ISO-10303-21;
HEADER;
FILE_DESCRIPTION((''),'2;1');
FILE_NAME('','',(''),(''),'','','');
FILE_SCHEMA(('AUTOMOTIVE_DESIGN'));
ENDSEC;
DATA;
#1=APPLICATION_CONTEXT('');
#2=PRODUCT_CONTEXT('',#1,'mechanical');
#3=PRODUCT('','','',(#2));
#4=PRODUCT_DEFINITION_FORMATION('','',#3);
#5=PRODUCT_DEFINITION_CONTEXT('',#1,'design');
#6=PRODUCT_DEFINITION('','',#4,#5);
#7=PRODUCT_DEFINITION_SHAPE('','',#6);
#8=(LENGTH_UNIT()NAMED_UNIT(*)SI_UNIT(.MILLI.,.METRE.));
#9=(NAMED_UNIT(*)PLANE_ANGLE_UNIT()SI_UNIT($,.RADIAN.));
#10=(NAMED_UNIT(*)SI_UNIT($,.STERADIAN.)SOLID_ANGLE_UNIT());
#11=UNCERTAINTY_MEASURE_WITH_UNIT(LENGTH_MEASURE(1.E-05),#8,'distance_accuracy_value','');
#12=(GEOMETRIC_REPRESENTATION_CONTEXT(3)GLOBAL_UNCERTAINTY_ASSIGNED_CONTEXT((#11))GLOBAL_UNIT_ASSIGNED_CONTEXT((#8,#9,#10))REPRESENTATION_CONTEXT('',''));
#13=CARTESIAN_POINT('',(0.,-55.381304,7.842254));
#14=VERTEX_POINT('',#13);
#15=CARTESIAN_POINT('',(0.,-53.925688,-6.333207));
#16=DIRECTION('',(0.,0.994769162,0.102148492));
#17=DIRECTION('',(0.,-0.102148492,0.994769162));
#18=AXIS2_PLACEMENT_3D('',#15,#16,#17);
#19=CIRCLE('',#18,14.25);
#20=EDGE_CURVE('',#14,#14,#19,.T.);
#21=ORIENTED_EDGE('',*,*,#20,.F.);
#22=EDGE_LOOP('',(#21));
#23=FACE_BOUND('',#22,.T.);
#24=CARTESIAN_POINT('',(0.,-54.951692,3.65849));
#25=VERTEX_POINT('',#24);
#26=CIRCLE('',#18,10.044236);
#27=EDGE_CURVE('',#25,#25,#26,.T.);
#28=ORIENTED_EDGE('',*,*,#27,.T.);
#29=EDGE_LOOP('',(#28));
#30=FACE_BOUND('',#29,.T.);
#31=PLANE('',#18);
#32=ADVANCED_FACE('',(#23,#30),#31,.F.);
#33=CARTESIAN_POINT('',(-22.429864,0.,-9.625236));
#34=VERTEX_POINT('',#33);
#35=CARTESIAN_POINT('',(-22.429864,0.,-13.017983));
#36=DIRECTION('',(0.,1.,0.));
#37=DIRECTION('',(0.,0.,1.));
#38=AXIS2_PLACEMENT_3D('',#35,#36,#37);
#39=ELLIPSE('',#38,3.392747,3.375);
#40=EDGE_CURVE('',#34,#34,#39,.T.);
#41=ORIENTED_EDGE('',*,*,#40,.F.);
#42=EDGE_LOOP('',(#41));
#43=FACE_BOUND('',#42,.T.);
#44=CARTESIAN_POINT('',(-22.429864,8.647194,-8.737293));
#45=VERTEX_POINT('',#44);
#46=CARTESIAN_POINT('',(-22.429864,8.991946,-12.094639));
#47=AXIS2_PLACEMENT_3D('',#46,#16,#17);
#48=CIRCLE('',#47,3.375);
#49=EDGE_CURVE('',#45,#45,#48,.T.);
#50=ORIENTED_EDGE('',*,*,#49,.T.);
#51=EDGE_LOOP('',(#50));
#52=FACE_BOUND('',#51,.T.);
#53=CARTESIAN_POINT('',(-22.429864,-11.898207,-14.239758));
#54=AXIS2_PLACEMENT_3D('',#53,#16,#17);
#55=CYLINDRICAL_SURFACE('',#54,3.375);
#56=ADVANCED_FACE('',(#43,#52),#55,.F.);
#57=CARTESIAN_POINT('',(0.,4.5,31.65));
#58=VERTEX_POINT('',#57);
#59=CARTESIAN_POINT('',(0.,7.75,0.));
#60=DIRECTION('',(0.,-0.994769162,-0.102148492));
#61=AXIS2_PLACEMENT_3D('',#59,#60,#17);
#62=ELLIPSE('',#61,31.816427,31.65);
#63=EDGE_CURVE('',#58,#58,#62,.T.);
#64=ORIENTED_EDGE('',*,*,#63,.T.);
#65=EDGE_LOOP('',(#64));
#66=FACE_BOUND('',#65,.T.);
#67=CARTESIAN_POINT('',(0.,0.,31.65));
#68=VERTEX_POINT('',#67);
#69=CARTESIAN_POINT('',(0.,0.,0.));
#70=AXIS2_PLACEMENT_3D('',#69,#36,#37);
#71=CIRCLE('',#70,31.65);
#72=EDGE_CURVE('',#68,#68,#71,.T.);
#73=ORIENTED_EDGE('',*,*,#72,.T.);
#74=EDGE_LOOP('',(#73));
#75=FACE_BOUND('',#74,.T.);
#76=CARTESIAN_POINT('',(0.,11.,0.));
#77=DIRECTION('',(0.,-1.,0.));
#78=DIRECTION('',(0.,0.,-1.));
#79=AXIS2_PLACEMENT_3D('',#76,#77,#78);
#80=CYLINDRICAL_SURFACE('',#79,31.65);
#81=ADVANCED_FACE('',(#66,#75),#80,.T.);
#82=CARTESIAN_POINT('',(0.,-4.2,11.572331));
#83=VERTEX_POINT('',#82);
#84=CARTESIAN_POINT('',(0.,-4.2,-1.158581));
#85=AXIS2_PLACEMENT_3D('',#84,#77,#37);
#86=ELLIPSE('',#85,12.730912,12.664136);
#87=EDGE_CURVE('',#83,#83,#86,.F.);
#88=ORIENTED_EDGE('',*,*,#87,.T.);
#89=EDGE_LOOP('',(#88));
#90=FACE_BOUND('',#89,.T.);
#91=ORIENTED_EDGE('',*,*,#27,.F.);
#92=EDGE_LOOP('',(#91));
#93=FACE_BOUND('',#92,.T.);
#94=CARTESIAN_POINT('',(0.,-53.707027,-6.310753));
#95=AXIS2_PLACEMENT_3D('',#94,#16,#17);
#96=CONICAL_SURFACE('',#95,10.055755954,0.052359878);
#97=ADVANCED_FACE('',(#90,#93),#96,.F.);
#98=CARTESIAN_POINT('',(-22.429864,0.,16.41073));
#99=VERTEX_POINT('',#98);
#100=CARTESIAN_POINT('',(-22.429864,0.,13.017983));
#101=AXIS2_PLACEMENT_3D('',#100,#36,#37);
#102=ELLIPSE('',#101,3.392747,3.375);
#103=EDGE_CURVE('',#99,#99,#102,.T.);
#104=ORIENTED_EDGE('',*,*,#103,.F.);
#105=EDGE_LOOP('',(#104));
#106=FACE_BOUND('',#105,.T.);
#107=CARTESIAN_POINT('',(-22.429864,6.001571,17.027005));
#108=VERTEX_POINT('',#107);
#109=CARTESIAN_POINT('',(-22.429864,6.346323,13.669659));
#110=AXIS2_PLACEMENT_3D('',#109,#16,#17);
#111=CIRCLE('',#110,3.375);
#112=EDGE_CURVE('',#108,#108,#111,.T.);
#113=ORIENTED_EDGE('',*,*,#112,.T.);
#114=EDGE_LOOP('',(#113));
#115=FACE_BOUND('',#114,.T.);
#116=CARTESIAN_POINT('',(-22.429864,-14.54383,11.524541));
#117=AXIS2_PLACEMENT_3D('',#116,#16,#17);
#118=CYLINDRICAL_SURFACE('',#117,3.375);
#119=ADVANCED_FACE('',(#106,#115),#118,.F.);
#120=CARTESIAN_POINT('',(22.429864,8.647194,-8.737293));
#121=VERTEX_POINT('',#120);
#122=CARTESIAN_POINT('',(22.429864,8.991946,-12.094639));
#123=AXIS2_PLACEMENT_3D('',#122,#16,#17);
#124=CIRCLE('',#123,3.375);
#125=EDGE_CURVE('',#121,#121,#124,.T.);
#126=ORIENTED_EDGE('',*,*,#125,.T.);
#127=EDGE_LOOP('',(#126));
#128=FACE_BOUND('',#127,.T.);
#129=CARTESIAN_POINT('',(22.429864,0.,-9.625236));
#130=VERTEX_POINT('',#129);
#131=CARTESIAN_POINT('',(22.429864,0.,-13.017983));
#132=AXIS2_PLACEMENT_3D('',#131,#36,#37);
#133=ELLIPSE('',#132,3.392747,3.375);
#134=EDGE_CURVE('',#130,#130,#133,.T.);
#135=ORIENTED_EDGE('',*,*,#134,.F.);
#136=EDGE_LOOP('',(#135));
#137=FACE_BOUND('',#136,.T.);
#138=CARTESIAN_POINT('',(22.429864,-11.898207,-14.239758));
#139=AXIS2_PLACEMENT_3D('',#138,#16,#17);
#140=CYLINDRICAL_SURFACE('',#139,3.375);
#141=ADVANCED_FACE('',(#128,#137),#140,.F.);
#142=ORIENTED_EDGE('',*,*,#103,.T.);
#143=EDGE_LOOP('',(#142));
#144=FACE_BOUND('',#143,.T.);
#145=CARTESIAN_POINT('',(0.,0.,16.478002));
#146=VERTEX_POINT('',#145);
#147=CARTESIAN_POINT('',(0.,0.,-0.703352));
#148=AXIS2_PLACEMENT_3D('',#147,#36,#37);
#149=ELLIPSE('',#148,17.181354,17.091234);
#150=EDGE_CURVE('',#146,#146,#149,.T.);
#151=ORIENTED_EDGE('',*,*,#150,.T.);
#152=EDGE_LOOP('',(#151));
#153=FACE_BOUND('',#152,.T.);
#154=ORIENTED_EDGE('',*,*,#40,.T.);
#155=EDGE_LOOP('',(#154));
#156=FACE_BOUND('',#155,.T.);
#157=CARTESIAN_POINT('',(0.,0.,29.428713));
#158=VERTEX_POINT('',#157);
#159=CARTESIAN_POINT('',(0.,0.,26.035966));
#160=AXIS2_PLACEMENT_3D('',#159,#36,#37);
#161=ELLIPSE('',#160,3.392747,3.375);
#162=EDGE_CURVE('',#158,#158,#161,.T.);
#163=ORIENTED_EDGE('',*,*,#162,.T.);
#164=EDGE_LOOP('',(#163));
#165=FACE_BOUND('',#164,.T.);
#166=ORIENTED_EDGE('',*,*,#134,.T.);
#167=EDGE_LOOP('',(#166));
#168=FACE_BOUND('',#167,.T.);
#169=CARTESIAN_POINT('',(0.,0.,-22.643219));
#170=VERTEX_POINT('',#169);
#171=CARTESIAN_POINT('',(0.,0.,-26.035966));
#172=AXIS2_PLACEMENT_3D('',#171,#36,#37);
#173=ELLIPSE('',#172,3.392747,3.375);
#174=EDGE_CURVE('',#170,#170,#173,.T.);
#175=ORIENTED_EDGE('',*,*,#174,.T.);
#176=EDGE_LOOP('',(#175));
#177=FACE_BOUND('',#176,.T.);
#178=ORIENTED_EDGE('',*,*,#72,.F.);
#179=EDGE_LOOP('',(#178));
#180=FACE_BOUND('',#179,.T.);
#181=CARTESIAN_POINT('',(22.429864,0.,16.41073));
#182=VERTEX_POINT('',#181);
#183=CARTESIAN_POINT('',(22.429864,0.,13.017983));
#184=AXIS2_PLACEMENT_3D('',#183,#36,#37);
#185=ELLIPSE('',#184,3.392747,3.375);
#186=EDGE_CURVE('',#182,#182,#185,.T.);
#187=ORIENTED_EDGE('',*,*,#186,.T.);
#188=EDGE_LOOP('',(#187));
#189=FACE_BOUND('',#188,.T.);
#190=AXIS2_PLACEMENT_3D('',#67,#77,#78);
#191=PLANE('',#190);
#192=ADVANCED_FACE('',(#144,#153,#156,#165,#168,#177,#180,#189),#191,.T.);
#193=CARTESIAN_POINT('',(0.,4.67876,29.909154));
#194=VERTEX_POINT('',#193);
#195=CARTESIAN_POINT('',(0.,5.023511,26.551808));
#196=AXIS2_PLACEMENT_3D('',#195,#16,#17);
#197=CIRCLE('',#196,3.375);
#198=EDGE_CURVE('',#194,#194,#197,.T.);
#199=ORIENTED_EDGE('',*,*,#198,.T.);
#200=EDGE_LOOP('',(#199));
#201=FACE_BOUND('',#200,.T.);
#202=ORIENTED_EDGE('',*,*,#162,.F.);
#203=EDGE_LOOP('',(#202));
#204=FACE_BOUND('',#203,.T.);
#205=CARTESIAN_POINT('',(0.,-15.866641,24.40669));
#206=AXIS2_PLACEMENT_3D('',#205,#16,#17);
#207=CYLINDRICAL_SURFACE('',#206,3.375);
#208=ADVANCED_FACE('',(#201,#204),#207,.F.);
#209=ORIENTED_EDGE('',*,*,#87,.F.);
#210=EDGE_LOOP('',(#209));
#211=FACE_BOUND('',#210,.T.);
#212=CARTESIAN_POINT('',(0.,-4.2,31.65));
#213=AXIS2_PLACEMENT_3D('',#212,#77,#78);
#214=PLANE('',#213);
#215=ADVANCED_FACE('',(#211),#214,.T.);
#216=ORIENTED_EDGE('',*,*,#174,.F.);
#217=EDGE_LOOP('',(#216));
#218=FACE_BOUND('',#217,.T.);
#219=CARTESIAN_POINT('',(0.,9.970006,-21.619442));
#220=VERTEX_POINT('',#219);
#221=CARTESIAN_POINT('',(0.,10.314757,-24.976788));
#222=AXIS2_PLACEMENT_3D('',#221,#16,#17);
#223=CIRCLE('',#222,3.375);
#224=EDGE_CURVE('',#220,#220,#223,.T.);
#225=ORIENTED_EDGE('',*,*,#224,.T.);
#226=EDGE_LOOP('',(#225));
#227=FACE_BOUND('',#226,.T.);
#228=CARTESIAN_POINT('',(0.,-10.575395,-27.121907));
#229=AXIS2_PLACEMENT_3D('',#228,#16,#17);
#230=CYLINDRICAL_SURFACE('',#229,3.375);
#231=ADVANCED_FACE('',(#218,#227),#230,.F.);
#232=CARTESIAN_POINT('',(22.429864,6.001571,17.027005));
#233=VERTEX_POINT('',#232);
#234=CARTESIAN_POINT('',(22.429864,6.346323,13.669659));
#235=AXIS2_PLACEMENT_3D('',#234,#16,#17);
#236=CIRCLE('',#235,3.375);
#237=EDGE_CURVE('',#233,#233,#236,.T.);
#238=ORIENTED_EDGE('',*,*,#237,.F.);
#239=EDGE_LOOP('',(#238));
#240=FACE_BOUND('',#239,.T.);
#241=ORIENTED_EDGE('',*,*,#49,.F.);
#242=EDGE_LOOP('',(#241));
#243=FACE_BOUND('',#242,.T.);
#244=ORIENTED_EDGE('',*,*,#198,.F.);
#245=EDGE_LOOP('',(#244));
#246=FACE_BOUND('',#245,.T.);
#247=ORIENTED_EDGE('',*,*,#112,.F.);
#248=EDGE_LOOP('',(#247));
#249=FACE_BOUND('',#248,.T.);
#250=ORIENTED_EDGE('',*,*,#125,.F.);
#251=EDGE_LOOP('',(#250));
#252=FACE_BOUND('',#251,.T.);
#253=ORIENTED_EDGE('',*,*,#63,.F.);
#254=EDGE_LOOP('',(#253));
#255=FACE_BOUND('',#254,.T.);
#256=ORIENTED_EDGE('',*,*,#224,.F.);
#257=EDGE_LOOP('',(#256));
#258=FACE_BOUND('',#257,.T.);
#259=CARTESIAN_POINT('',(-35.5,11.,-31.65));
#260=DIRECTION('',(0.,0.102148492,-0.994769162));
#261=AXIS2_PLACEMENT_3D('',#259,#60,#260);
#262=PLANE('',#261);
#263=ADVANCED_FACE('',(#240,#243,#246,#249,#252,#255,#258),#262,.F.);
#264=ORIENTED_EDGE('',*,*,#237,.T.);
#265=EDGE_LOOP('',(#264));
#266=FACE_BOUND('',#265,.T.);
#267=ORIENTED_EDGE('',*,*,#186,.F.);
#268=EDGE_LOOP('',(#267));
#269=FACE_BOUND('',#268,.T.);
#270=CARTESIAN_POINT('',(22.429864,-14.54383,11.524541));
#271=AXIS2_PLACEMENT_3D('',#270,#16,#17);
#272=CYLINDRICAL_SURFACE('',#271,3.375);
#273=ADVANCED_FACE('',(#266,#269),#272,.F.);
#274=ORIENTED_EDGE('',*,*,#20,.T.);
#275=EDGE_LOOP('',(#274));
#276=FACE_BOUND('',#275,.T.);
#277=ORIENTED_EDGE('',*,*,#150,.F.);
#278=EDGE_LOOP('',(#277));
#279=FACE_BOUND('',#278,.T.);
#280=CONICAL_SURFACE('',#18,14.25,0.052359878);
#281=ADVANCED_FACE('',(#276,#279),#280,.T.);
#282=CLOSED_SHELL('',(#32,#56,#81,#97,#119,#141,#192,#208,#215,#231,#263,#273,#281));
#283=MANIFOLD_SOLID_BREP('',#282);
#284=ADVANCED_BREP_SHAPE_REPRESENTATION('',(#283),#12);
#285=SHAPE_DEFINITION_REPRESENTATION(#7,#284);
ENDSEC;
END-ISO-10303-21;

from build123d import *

# Parameters (mm, degrees)
SKETCH1_R           = 31.65
BOSS_EXTRUDE1_DEPTH = 11
CUT_EXTRUDE1_DEPTH  = 35.5
SKETCH3_R           = 3.375
CUT_EXTRUDE2_DEPTH  = 21
SKETCH4_R           = 14.25
BOSS_EXTRUDE2_DEPTH = 62
SHELL1_T            = -4.2


# Read off the part's stored shape, not the designer's step: Draft1, Split1
with BuildPart() as part:
    # Sketch1 → Boss-Extrude1 (new body)
    with BuildSketch(Plane(origin=(0, 0, 0), x_dir=(1, 0, 0), z_dir=(0, 1, 0))):
        with Locations(Location((0, 0, 0), (0, 0, 270))):
            Circle(SKETCH1_R)
    extrude(amount=BOSS_EXTRUDE1_DEPTH)

    # Sketch2 → Cut-Extrude1 (cut, symmetric)
    with BuildSketch(Plane(origin=(0, 0, 0), x_dir=(0, 0, -1), z_dir=(1, 0, 0))):
        Polygon((31.65, 11), (-31.65, 4.5), (-31.65, 11), align=None)
    extrude(amount=CUT_EXTRUDE1_DEPTH, both=True, mode=Mode.SUBTRACT)

    # Sketch3 → Cut-Extrude2 (cut)
    with BuildSketch(Plane(origin=(0, 7.669134063, 0.787509817), x_dir=(1, 0, 0), z_dir=(0, 0.9947691619431022, 0.10214849214265666))):
        with Locations(Location((0, -25.899775761, 0), (0, 0, 270))):
            Circle(SKETCH3_R)
        with Locations(Location((-22.429863761, -12.94988788, 0), (0, 0, 270))):
            Circle(SKETCH3_R)
        with Locations(Location((-22.429863761, 12.94988788, 0), (0, 0, 270))):
            Circle(SKETCH3_R)
        with Locations(Location((0, 25.899775761, 0), (0, 0, 270))):
            Circle(SKETCH3_R)
        with Locations(Location((22.429863761, 12.94988788, 0), (0, 0, 270))):
            Circle(SKETCH3_R)
        with Locations(Location((22.429863761, -12.94988788, 0), (0, 0, 270))):
            Circle(SKETCH3_R)
    extrude(amount=-CUT_EXTRUDE2_DEPTH, mode=Mode.SUBTRACT)

    # Sketch4 → Boss-Extrude2 (add)
    with BuildSketch(Plane(origin=(0, 7.669134063, 0.787509817), x_dir=(1, 0, 0), z_dir=(0, 0.9947691619431022, 0.10214849214265666))):
        with Locations(Location((0, 0.791650814, 0), (0, 0, 270))):
            Circle(SKETCH4_R)
    extrude(amount=-BOSS_EXTRUDE2_DEPTH)

    # Draft1 outline → Draft1 (revolve)
    with BuildSketch(Plane(origin=(0, 0.080865937, -0.787509817), x_dir=(1, 0, 0), z_dir=(0, -0.102148492142657, 0.994769161943102))):
        Polygon((14.25, -54.290538995), (17.183507111, 1.684111168), (14.25, 1.684111168), align=None)
    revolve(axis=Axis((0, 0.080865937, -0.787509817), (0, 0.994769161943102, 0.102148492142657)))


with BuildPart() as body_2:
    # Split1: the piece on the far side of the plane
    add(part.part)
    split(bisect_by=Plane(origin=(0, 0, 0), x_dir=(1, 0, 0), z_dir=(0, 1, 0)), keep=Keep.BOTTOM)

    # Shell1
    shell1_openings = [body_2.faces().sort_by_distance(p)[0] for p in [
        (0, -53.92568804, -6.333206513),
    ]]
    offset(amount=SHELL1_T, openings=shell1_openings, kind=Kind.INTERSECTION)


with BuildPart() as part_1:
    add(part.part)

    # Split1
    split(bisect_by=Plane(origin=(0, 0, 0), x_dir=(1, 0, 0), z_dir=(0, 1, 0)), keep=Keep.TOP)


with BuildPart() as body_2_1:
    add(body_2.part)

    # Combine1: union part
    add(part_1.part)


solid = body_2_1.part
